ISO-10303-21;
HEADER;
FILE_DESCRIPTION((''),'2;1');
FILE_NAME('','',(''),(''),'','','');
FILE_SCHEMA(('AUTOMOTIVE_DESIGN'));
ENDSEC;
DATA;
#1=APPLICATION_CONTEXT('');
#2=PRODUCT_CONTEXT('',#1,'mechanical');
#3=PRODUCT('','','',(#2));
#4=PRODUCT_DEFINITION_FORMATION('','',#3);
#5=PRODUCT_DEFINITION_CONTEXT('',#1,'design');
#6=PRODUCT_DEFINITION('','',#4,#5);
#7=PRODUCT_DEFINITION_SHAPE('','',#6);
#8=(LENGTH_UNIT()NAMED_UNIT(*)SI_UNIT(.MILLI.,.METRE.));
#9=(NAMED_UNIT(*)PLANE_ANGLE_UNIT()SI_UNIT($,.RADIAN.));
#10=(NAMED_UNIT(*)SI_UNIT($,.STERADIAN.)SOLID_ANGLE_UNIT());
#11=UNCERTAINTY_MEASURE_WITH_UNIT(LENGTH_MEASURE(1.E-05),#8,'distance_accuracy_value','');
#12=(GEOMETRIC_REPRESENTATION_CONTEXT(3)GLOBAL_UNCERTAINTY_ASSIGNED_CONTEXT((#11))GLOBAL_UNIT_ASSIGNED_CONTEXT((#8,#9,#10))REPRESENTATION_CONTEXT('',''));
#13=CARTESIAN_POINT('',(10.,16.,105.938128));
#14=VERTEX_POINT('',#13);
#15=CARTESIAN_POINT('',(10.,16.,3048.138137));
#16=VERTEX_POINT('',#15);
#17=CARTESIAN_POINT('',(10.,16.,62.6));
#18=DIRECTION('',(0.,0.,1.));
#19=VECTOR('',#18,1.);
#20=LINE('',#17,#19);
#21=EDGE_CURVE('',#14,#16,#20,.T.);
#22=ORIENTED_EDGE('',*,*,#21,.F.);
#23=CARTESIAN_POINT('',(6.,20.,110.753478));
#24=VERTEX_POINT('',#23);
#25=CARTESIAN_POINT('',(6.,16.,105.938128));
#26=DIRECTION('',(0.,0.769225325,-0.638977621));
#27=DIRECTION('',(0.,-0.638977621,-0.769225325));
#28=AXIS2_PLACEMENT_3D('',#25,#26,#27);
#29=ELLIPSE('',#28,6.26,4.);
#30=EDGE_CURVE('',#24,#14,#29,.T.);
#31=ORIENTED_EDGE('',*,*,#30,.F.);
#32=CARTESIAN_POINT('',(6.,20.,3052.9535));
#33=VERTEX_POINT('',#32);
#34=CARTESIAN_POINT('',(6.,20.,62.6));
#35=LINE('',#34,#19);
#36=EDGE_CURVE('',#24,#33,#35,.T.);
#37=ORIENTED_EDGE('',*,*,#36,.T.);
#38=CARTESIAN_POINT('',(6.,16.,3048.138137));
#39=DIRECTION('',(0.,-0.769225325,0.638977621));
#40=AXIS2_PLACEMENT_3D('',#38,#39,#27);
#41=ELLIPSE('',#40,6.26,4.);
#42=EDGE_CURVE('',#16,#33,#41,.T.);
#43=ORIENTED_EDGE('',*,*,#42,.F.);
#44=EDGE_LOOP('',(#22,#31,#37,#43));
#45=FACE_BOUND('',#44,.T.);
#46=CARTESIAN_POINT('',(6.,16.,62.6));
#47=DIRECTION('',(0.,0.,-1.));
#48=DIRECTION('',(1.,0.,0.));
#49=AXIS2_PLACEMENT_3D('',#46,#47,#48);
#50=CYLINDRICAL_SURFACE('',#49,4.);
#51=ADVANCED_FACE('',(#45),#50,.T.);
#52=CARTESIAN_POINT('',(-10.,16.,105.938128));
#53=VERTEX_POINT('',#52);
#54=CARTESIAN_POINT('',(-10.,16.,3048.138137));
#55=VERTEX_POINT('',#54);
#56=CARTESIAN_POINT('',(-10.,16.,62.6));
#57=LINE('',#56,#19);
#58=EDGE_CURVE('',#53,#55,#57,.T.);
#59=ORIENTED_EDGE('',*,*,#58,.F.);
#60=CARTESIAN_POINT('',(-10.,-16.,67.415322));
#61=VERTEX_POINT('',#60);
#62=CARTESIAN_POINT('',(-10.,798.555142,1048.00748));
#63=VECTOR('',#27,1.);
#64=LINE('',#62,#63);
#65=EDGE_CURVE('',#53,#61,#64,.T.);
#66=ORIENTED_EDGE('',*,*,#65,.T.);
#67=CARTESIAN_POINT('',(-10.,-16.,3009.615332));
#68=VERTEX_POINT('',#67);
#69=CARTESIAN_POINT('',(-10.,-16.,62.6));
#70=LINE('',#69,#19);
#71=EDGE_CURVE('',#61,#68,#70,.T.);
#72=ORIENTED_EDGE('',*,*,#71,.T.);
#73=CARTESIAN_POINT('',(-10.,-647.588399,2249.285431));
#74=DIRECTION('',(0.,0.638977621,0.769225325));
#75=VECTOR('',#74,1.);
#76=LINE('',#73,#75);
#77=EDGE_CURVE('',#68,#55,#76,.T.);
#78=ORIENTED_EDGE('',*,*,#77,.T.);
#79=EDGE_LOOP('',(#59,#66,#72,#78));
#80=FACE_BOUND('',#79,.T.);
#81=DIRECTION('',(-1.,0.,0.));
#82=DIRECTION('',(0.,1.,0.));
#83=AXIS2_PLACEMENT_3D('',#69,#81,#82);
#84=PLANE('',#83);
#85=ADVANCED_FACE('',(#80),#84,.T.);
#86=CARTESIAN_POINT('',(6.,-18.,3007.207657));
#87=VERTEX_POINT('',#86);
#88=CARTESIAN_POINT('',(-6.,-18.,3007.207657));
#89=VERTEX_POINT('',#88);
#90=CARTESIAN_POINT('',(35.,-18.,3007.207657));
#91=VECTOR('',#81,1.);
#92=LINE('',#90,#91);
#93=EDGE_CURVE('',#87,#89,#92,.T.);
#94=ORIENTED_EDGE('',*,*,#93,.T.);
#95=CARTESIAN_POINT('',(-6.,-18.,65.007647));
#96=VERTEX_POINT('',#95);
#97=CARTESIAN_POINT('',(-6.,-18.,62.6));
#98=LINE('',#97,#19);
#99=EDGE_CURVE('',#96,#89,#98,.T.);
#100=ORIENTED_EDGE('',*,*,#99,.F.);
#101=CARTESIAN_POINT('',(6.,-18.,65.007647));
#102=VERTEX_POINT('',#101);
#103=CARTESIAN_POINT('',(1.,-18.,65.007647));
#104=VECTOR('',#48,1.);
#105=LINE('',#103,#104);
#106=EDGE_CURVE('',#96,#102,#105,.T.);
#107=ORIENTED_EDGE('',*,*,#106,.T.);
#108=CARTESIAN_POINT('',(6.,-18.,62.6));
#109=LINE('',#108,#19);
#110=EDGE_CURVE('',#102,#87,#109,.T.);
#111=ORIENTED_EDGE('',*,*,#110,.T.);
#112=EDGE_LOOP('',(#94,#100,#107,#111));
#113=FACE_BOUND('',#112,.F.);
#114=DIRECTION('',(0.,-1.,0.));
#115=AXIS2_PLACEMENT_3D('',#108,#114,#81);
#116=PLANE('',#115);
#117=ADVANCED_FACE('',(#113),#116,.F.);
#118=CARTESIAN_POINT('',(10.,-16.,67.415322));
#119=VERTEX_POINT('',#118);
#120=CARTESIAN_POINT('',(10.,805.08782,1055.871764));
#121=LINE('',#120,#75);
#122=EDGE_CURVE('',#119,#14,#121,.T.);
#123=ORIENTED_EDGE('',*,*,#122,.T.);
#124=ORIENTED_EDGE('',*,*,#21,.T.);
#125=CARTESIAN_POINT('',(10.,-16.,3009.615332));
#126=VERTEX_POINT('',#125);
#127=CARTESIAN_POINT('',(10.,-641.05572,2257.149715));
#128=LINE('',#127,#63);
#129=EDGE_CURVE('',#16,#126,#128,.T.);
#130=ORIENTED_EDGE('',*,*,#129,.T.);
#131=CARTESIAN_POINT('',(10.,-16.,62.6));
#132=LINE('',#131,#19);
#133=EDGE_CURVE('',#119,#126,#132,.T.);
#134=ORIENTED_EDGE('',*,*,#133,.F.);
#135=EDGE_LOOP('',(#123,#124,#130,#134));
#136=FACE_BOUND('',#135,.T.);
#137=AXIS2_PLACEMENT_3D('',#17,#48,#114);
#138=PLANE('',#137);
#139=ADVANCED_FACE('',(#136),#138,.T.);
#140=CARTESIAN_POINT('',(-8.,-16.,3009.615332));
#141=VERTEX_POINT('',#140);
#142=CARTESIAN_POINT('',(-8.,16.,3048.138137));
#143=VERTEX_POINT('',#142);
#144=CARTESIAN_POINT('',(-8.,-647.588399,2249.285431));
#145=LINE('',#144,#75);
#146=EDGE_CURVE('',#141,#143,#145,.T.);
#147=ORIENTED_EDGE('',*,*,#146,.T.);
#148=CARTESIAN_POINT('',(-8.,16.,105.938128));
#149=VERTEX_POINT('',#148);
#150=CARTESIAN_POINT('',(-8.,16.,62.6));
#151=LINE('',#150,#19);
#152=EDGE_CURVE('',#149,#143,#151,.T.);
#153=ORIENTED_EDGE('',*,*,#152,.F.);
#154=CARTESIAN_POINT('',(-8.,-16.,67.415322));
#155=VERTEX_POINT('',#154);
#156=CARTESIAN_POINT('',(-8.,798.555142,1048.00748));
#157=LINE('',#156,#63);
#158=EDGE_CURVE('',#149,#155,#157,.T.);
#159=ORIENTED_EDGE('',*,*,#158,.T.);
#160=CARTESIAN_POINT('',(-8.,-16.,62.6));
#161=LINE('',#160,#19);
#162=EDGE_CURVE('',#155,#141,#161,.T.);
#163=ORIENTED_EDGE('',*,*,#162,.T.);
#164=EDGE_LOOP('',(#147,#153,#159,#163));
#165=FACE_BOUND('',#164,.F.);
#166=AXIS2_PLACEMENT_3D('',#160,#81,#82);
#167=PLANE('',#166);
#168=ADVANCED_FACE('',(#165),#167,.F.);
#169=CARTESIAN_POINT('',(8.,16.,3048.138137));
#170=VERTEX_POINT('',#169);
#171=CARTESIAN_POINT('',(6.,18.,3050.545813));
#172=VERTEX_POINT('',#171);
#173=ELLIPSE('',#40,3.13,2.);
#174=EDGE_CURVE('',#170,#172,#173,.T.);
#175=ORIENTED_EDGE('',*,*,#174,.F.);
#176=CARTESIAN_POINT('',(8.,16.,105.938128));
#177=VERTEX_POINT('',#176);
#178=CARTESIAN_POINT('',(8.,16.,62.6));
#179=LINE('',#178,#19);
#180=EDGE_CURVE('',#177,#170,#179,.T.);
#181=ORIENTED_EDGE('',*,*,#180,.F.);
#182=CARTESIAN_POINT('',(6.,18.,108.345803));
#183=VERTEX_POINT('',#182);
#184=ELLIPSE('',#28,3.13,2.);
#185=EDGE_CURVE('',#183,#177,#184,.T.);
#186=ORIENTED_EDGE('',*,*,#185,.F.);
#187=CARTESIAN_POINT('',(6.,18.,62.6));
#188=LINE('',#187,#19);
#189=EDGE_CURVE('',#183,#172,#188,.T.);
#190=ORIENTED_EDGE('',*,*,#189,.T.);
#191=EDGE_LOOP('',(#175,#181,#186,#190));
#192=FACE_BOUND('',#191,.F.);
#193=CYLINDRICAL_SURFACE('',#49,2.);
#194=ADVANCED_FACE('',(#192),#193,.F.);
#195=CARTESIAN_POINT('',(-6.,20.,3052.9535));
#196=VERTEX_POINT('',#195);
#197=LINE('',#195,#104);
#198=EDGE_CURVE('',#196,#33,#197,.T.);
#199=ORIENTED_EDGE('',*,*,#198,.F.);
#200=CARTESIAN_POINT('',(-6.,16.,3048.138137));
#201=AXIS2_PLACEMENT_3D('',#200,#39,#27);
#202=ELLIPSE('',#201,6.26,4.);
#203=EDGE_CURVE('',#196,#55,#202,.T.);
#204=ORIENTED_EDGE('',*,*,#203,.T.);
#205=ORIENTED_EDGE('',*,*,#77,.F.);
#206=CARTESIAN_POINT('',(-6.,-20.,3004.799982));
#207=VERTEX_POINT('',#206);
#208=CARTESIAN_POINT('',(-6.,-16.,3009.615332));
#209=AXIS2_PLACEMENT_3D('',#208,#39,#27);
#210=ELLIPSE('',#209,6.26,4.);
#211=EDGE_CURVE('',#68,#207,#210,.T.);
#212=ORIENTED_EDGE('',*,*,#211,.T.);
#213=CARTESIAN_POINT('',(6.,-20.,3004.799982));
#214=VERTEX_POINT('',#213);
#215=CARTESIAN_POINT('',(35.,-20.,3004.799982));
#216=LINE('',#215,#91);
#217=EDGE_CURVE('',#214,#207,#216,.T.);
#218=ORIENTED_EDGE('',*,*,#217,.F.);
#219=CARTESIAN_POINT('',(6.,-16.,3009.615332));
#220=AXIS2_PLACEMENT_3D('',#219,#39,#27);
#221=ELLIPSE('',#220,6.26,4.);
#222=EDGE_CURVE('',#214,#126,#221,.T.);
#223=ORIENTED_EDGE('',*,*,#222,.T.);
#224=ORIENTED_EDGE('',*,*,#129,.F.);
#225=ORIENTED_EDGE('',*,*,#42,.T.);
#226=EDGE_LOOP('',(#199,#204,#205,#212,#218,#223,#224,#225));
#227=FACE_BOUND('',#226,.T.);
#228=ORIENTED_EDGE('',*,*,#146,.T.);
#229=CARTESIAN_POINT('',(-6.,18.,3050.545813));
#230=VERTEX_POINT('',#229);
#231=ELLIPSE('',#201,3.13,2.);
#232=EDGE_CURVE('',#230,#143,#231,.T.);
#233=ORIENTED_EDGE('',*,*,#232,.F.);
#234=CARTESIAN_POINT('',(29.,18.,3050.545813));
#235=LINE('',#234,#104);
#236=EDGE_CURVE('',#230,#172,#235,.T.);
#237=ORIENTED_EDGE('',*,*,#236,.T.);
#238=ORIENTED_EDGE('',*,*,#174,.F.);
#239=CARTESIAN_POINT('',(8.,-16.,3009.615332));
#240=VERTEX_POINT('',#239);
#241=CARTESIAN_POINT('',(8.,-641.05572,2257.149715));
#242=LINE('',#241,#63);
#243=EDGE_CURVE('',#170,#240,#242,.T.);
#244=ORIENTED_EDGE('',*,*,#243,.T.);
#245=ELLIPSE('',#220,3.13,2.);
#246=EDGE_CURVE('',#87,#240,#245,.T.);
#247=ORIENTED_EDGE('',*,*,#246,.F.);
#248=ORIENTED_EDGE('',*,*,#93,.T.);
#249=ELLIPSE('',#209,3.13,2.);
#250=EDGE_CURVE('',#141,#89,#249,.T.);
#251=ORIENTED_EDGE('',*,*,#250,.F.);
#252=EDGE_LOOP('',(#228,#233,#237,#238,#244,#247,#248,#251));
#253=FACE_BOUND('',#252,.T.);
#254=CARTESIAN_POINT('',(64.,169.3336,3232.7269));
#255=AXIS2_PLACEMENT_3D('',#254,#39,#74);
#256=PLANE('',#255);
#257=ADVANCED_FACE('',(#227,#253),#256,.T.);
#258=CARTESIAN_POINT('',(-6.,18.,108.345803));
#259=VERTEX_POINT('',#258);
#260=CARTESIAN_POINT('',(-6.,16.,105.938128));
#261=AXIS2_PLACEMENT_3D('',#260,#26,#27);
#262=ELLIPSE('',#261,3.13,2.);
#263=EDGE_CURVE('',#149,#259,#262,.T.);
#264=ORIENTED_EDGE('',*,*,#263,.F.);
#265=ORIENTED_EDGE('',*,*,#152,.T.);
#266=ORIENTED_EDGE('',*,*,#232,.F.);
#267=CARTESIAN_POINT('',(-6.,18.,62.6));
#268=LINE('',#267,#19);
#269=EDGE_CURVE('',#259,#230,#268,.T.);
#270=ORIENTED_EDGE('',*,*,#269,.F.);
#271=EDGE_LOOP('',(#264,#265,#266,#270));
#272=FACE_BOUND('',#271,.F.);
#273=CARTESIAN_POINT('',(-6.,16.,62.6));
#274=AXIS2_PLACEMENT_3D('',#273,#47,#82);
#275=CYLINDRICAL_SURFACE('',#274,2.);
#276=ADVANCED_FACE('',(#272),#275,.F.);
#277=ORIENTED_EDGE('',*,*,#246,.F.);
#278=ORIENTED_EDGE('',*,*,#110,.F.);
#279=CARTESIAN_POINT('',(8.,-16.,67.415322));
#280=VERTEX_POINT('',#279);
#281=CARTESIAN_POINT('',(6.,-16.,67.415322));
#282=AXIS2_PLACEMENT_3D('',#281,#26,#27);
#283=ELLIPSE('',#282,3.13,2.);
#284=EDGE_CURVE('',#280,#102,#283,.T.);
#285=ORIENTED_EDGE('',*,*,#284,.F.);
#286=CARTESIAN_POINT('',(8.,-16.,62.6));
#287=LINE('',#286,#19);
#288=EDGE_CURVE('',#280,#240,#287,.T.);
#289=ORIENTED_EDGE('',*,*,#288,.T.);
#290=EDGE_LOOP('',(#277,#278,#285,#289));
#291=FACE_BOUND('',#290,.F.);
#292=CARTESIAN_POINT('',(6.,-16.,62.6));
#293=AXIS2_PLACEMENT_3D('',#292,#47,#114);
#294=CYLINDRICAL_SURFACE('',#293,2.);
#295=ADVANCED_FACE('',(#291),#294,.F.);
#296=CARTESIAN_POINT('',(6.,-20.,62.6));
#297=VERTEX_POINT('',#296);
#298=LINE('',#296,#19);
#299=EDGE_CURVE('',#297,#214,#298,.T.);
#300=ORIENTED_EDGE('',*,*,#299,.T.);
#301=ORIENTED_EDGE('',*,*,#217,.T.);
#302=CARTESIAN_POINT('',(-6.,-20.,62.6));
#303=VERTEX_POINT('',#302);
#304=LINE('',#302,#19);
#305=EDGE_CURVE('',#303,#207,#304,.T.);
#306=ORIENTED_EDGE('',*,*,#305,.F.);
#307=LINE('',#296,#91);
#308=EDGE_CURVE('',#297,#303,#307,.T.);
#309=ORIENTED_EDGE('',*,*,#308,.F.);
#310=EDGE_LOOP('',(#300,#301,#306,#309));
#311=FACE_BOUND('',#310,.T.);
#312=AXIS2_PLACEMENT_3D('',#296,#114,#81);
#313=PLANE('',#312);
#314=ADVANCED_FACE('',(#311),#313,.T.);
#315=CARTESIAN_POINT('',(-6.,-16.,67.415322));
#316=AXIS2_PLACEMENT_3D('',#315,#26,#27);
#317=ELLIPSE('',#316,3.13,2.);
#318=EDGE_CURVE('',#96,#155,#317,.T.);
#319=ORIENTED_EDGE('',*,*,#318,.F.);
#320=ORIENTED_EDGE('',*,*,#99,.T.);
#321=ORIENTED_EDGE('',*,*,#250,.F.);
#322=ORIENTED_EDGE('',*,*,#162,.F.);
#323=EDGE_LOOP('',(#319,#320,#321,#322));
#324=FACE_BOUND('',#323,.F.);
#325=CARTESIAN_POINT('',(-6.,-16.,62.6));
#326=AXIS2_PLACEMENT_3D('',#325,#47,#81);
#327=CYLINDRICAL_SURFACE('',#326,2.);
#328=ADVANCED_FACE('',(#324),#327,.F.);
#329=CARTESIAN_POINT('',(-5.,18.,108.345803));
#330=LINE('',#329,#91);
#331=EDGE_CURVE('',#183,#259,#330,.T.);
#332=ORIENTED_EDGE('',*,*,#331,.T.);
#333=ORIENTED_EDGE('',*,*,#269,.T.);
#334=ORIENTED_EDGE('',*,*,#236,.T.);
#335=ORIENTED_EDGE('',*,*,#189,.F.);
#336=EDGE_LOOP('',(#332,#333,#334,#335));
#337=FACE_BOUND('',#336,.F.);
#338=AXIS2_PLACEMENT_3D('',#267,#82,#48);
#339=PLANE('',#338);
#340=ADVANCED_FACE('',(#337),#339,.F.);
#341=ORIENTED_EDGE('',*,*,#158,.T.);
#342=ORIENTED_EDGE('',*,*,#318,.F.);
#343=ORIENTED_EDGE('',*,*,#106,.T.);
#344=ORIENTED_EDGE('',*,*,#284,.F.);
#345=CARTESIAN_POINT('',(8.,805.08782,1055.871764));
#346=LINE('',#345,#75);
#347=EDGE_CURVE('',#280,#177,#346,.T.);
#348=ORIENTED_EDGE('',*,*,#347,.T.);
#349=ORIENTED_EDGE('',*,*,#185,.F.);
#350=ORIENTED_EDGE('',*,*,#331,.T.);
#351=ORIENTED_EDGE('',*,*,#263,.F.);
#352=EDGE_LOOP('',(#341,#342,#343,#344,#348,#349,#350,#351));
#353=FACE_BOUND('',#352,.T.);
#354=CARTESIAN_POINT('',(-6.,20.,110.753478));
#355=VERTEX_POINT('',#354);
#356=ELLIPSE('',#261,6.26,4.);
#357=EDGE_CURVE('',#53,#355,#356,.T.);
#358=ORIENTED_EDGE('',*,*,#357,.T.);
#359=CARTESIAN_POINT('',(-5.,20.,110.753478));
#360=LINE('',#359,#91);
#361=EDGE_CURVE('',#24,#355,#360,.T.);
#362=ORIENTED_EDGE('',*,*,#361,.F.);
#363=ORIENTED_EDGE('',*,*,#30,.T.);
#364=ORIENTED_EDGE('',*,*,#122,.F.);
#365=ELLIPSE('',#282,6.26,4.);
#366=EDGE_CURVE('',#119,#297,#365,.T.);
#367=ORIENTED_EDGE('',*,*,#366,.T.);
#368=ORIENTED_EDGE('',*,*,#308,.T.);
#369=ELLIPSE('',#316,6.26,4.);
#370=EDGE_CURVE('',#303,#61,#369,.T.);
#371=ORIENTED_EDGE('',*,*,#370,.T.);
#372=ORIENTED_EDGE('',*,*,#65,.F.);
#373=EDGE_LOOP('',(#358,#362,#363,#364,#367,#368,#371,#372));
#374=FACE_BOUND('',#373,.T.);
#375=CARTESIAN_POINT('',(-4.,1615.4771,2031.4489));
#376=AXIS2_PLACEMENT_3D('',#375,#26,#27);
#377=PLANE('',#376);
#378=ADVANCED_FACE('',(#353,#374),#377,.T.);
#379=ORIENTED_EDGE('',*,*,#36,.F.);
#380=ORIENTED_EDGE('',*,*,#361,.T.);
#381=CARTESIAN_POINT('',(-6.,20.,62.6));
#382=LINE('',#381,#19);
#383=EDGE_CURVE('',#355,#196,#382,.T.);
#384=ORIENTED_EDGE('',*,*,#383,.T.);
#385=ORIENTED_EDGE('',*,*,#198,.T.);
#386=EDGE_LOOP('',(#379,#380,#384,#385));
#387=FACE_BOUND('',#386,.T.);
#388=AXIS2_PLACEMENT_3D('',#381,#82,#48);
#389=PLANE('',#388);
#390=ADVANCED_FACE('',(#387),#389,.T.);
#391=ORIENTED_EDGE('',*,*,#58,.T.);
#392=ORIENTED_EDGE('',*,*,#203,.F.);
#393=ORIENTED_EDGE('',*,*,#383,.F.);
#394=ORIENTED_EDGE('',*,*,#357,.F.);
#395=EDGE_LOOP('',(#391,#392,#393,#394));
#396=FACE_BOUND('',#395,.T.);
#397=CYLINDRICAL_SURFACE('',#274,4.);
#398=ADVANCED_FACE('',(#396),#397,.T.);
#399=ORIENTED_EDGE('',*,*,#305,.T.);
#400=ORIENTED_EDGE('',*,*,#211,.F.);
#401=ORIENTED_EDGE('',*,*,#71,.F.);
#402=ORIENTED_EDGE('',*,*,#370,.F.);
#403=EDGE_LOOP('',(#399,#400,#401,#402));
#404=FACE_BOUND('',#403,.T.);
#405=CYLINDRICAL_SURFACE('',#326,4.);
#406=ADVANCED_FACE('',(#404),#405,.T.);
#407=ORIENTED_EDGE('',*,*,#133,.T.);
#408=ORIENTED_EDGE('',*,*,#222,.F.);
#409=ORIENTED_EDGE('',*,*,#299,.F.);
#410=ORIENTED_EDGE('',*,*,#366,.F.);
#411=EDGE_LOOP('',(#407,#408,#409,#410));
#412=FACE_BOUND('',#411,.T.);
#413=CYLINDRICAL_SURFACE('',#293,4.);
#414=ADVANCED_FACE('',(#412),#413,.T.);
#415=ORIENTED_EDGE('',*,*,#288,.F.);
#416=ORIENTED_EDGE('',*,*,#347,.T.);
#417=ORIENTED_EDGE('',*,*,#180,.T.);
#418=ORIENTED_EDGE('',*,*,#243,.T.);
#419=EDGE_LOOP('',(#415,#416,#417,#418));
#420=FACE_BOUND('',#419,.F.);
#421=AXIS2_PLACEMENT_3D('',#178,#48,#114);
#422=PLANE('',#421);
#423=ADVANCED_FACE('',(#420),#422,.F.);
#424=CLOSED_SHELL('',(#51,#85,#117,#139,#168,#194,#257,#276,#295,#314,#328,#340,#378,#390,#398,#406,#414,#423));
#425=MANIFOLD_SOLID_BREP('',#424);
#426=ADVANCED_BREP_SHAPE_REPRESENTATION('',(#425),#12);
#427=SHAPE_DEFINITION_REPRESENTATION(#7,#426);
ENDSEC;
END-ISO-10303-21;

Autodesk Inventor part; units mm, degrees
ref_plane "Start Plane" through (0, 0, 62.6) normal (0, 0, 1) x (1, 0, 0)
ref_plane "End Plane" through (0, 0, 3052.9535) normal (0, 0, 1) x (1, 0, 0)
sketch "Sketch" plane through (0, 0, 0) normal (0, 0, 1) x (1, 0, 0)
  line L0 (-10, -16) -> (-10, 16)
  line L1 (-6, 20) -> (6, 20)
  line L2 (10, 16) -> (10, -16)
  line L3 (6, -20) -> (-6, -20)
  arc A0 (-10, -16) -> (-6, -20) centre (-6, -16) ccw
  arc A1 (10, 16) -> (6, 20) centre (6, 16) ccw
  arc A2 (-6, 20) -> (-10, 16) centre (-6, 16) ccw
  arc A3 (6, -20) -> (10, -16) centre (6, -16) ccw
  arc A4 (-6, 18) -> (-8, 16) centre (-6, 16) ccw
  line L4 (-6, 18) -> (6, 18)
  arc A5 (8, 16) -> (6, 18) centre (6, 16) ccw
  line L5 (8, 16) -> (8, -16)
  arc A6 (6, -18) -> (8, -16) centre (6, -16) ccw
  line L6 (6, -18) -> (-6, -18)
  arc A7 (-8, -16) -> (-6, -18) centre (-6, -16) ccw
  line L7 (-8, -16) -> (-8, 16)
  line L8 (0, 29.1598) -> (0, -29.1598) construction
  line L9 (-15.1598, 0) -> (15.1598, 0) construction
  dimension "d7" = 4
  dimension "d9" = 20
  dimension "d11" = 40
  dimension "d12" = 2
  dimension "d15" = 10
  dimension "d16" = 20
extrude "Body" add sketch "Sketch" along normal up to surface (2990.3535 mm away) from surface at 62.6
sketch "Sketch3" plane through (0, 0, 0) normal (0, 0, 1) x (1, 0, 0)
  line L0 (0, 0) -> (10, 0)
ref_plane "Work Plane3" through (0, 0, 0) normal (0, -1, 0) x (1, 0, 0)
ref_plane "Work Plane4" through (64, 169.3336, 3232.7269) normal (0, -0.7692253, 0.6389776) x (1, 0, 0)
split "Split1" plane through (64, 169.3336, 3232.7269) removes the side toward (0, -0.7692253, 0.6389776)
ref_plane "Work Plane5" through (-4, 1615.4771, 2031.4489) normal (0, 0.7692253, -0.6389776) x (1, 0, 0)
split "Split2" plane through (-4, 1615.4771, 2031.4489) removes the side toward (0, 0.7692253, -0.6389776)
sketch "Sketch4" plane through (0, 0, 0) normal (0, -1, 0) x (1, 0, 0)
  line L0 (-2, 62.6) -> (12, 62.6) projected
  line L1 (-2, 3052.9535) -> (12, 3052.9535) projected
  dimension "d18" = 2990.3535
equation "\"d7\" = G_IR"
equation "\"d9\" = G_W"
equation "\"d11\" = G_H"
equation "\"d12\" = G_T"
equation "\"d15\" = 0.5 * d9"
equation "\"d16\" = 0.5 * d11"
equation "\"d3\" = G_L"
equation "\"G_W\" = 20"
equation "\"G_H\" = 40"
equation "\"G_T\" = 2"
equation "\"G_IR\" = 4"
equation "\"G_L\" = d18"
equation "\"G_OFFSET_START\" = -62.6"
equation "\"G_OFFSET_END\" = -77.0465"
equation "\"d13\" = -G_OFFSET_START"
equation "\"d14\" = G_OFFSET_END + B_L"
equation "\"B_L\" = 3130"
properties part number "ISO 4019 - 40x20x2 - 2990,35" material "Steel, Mild"
